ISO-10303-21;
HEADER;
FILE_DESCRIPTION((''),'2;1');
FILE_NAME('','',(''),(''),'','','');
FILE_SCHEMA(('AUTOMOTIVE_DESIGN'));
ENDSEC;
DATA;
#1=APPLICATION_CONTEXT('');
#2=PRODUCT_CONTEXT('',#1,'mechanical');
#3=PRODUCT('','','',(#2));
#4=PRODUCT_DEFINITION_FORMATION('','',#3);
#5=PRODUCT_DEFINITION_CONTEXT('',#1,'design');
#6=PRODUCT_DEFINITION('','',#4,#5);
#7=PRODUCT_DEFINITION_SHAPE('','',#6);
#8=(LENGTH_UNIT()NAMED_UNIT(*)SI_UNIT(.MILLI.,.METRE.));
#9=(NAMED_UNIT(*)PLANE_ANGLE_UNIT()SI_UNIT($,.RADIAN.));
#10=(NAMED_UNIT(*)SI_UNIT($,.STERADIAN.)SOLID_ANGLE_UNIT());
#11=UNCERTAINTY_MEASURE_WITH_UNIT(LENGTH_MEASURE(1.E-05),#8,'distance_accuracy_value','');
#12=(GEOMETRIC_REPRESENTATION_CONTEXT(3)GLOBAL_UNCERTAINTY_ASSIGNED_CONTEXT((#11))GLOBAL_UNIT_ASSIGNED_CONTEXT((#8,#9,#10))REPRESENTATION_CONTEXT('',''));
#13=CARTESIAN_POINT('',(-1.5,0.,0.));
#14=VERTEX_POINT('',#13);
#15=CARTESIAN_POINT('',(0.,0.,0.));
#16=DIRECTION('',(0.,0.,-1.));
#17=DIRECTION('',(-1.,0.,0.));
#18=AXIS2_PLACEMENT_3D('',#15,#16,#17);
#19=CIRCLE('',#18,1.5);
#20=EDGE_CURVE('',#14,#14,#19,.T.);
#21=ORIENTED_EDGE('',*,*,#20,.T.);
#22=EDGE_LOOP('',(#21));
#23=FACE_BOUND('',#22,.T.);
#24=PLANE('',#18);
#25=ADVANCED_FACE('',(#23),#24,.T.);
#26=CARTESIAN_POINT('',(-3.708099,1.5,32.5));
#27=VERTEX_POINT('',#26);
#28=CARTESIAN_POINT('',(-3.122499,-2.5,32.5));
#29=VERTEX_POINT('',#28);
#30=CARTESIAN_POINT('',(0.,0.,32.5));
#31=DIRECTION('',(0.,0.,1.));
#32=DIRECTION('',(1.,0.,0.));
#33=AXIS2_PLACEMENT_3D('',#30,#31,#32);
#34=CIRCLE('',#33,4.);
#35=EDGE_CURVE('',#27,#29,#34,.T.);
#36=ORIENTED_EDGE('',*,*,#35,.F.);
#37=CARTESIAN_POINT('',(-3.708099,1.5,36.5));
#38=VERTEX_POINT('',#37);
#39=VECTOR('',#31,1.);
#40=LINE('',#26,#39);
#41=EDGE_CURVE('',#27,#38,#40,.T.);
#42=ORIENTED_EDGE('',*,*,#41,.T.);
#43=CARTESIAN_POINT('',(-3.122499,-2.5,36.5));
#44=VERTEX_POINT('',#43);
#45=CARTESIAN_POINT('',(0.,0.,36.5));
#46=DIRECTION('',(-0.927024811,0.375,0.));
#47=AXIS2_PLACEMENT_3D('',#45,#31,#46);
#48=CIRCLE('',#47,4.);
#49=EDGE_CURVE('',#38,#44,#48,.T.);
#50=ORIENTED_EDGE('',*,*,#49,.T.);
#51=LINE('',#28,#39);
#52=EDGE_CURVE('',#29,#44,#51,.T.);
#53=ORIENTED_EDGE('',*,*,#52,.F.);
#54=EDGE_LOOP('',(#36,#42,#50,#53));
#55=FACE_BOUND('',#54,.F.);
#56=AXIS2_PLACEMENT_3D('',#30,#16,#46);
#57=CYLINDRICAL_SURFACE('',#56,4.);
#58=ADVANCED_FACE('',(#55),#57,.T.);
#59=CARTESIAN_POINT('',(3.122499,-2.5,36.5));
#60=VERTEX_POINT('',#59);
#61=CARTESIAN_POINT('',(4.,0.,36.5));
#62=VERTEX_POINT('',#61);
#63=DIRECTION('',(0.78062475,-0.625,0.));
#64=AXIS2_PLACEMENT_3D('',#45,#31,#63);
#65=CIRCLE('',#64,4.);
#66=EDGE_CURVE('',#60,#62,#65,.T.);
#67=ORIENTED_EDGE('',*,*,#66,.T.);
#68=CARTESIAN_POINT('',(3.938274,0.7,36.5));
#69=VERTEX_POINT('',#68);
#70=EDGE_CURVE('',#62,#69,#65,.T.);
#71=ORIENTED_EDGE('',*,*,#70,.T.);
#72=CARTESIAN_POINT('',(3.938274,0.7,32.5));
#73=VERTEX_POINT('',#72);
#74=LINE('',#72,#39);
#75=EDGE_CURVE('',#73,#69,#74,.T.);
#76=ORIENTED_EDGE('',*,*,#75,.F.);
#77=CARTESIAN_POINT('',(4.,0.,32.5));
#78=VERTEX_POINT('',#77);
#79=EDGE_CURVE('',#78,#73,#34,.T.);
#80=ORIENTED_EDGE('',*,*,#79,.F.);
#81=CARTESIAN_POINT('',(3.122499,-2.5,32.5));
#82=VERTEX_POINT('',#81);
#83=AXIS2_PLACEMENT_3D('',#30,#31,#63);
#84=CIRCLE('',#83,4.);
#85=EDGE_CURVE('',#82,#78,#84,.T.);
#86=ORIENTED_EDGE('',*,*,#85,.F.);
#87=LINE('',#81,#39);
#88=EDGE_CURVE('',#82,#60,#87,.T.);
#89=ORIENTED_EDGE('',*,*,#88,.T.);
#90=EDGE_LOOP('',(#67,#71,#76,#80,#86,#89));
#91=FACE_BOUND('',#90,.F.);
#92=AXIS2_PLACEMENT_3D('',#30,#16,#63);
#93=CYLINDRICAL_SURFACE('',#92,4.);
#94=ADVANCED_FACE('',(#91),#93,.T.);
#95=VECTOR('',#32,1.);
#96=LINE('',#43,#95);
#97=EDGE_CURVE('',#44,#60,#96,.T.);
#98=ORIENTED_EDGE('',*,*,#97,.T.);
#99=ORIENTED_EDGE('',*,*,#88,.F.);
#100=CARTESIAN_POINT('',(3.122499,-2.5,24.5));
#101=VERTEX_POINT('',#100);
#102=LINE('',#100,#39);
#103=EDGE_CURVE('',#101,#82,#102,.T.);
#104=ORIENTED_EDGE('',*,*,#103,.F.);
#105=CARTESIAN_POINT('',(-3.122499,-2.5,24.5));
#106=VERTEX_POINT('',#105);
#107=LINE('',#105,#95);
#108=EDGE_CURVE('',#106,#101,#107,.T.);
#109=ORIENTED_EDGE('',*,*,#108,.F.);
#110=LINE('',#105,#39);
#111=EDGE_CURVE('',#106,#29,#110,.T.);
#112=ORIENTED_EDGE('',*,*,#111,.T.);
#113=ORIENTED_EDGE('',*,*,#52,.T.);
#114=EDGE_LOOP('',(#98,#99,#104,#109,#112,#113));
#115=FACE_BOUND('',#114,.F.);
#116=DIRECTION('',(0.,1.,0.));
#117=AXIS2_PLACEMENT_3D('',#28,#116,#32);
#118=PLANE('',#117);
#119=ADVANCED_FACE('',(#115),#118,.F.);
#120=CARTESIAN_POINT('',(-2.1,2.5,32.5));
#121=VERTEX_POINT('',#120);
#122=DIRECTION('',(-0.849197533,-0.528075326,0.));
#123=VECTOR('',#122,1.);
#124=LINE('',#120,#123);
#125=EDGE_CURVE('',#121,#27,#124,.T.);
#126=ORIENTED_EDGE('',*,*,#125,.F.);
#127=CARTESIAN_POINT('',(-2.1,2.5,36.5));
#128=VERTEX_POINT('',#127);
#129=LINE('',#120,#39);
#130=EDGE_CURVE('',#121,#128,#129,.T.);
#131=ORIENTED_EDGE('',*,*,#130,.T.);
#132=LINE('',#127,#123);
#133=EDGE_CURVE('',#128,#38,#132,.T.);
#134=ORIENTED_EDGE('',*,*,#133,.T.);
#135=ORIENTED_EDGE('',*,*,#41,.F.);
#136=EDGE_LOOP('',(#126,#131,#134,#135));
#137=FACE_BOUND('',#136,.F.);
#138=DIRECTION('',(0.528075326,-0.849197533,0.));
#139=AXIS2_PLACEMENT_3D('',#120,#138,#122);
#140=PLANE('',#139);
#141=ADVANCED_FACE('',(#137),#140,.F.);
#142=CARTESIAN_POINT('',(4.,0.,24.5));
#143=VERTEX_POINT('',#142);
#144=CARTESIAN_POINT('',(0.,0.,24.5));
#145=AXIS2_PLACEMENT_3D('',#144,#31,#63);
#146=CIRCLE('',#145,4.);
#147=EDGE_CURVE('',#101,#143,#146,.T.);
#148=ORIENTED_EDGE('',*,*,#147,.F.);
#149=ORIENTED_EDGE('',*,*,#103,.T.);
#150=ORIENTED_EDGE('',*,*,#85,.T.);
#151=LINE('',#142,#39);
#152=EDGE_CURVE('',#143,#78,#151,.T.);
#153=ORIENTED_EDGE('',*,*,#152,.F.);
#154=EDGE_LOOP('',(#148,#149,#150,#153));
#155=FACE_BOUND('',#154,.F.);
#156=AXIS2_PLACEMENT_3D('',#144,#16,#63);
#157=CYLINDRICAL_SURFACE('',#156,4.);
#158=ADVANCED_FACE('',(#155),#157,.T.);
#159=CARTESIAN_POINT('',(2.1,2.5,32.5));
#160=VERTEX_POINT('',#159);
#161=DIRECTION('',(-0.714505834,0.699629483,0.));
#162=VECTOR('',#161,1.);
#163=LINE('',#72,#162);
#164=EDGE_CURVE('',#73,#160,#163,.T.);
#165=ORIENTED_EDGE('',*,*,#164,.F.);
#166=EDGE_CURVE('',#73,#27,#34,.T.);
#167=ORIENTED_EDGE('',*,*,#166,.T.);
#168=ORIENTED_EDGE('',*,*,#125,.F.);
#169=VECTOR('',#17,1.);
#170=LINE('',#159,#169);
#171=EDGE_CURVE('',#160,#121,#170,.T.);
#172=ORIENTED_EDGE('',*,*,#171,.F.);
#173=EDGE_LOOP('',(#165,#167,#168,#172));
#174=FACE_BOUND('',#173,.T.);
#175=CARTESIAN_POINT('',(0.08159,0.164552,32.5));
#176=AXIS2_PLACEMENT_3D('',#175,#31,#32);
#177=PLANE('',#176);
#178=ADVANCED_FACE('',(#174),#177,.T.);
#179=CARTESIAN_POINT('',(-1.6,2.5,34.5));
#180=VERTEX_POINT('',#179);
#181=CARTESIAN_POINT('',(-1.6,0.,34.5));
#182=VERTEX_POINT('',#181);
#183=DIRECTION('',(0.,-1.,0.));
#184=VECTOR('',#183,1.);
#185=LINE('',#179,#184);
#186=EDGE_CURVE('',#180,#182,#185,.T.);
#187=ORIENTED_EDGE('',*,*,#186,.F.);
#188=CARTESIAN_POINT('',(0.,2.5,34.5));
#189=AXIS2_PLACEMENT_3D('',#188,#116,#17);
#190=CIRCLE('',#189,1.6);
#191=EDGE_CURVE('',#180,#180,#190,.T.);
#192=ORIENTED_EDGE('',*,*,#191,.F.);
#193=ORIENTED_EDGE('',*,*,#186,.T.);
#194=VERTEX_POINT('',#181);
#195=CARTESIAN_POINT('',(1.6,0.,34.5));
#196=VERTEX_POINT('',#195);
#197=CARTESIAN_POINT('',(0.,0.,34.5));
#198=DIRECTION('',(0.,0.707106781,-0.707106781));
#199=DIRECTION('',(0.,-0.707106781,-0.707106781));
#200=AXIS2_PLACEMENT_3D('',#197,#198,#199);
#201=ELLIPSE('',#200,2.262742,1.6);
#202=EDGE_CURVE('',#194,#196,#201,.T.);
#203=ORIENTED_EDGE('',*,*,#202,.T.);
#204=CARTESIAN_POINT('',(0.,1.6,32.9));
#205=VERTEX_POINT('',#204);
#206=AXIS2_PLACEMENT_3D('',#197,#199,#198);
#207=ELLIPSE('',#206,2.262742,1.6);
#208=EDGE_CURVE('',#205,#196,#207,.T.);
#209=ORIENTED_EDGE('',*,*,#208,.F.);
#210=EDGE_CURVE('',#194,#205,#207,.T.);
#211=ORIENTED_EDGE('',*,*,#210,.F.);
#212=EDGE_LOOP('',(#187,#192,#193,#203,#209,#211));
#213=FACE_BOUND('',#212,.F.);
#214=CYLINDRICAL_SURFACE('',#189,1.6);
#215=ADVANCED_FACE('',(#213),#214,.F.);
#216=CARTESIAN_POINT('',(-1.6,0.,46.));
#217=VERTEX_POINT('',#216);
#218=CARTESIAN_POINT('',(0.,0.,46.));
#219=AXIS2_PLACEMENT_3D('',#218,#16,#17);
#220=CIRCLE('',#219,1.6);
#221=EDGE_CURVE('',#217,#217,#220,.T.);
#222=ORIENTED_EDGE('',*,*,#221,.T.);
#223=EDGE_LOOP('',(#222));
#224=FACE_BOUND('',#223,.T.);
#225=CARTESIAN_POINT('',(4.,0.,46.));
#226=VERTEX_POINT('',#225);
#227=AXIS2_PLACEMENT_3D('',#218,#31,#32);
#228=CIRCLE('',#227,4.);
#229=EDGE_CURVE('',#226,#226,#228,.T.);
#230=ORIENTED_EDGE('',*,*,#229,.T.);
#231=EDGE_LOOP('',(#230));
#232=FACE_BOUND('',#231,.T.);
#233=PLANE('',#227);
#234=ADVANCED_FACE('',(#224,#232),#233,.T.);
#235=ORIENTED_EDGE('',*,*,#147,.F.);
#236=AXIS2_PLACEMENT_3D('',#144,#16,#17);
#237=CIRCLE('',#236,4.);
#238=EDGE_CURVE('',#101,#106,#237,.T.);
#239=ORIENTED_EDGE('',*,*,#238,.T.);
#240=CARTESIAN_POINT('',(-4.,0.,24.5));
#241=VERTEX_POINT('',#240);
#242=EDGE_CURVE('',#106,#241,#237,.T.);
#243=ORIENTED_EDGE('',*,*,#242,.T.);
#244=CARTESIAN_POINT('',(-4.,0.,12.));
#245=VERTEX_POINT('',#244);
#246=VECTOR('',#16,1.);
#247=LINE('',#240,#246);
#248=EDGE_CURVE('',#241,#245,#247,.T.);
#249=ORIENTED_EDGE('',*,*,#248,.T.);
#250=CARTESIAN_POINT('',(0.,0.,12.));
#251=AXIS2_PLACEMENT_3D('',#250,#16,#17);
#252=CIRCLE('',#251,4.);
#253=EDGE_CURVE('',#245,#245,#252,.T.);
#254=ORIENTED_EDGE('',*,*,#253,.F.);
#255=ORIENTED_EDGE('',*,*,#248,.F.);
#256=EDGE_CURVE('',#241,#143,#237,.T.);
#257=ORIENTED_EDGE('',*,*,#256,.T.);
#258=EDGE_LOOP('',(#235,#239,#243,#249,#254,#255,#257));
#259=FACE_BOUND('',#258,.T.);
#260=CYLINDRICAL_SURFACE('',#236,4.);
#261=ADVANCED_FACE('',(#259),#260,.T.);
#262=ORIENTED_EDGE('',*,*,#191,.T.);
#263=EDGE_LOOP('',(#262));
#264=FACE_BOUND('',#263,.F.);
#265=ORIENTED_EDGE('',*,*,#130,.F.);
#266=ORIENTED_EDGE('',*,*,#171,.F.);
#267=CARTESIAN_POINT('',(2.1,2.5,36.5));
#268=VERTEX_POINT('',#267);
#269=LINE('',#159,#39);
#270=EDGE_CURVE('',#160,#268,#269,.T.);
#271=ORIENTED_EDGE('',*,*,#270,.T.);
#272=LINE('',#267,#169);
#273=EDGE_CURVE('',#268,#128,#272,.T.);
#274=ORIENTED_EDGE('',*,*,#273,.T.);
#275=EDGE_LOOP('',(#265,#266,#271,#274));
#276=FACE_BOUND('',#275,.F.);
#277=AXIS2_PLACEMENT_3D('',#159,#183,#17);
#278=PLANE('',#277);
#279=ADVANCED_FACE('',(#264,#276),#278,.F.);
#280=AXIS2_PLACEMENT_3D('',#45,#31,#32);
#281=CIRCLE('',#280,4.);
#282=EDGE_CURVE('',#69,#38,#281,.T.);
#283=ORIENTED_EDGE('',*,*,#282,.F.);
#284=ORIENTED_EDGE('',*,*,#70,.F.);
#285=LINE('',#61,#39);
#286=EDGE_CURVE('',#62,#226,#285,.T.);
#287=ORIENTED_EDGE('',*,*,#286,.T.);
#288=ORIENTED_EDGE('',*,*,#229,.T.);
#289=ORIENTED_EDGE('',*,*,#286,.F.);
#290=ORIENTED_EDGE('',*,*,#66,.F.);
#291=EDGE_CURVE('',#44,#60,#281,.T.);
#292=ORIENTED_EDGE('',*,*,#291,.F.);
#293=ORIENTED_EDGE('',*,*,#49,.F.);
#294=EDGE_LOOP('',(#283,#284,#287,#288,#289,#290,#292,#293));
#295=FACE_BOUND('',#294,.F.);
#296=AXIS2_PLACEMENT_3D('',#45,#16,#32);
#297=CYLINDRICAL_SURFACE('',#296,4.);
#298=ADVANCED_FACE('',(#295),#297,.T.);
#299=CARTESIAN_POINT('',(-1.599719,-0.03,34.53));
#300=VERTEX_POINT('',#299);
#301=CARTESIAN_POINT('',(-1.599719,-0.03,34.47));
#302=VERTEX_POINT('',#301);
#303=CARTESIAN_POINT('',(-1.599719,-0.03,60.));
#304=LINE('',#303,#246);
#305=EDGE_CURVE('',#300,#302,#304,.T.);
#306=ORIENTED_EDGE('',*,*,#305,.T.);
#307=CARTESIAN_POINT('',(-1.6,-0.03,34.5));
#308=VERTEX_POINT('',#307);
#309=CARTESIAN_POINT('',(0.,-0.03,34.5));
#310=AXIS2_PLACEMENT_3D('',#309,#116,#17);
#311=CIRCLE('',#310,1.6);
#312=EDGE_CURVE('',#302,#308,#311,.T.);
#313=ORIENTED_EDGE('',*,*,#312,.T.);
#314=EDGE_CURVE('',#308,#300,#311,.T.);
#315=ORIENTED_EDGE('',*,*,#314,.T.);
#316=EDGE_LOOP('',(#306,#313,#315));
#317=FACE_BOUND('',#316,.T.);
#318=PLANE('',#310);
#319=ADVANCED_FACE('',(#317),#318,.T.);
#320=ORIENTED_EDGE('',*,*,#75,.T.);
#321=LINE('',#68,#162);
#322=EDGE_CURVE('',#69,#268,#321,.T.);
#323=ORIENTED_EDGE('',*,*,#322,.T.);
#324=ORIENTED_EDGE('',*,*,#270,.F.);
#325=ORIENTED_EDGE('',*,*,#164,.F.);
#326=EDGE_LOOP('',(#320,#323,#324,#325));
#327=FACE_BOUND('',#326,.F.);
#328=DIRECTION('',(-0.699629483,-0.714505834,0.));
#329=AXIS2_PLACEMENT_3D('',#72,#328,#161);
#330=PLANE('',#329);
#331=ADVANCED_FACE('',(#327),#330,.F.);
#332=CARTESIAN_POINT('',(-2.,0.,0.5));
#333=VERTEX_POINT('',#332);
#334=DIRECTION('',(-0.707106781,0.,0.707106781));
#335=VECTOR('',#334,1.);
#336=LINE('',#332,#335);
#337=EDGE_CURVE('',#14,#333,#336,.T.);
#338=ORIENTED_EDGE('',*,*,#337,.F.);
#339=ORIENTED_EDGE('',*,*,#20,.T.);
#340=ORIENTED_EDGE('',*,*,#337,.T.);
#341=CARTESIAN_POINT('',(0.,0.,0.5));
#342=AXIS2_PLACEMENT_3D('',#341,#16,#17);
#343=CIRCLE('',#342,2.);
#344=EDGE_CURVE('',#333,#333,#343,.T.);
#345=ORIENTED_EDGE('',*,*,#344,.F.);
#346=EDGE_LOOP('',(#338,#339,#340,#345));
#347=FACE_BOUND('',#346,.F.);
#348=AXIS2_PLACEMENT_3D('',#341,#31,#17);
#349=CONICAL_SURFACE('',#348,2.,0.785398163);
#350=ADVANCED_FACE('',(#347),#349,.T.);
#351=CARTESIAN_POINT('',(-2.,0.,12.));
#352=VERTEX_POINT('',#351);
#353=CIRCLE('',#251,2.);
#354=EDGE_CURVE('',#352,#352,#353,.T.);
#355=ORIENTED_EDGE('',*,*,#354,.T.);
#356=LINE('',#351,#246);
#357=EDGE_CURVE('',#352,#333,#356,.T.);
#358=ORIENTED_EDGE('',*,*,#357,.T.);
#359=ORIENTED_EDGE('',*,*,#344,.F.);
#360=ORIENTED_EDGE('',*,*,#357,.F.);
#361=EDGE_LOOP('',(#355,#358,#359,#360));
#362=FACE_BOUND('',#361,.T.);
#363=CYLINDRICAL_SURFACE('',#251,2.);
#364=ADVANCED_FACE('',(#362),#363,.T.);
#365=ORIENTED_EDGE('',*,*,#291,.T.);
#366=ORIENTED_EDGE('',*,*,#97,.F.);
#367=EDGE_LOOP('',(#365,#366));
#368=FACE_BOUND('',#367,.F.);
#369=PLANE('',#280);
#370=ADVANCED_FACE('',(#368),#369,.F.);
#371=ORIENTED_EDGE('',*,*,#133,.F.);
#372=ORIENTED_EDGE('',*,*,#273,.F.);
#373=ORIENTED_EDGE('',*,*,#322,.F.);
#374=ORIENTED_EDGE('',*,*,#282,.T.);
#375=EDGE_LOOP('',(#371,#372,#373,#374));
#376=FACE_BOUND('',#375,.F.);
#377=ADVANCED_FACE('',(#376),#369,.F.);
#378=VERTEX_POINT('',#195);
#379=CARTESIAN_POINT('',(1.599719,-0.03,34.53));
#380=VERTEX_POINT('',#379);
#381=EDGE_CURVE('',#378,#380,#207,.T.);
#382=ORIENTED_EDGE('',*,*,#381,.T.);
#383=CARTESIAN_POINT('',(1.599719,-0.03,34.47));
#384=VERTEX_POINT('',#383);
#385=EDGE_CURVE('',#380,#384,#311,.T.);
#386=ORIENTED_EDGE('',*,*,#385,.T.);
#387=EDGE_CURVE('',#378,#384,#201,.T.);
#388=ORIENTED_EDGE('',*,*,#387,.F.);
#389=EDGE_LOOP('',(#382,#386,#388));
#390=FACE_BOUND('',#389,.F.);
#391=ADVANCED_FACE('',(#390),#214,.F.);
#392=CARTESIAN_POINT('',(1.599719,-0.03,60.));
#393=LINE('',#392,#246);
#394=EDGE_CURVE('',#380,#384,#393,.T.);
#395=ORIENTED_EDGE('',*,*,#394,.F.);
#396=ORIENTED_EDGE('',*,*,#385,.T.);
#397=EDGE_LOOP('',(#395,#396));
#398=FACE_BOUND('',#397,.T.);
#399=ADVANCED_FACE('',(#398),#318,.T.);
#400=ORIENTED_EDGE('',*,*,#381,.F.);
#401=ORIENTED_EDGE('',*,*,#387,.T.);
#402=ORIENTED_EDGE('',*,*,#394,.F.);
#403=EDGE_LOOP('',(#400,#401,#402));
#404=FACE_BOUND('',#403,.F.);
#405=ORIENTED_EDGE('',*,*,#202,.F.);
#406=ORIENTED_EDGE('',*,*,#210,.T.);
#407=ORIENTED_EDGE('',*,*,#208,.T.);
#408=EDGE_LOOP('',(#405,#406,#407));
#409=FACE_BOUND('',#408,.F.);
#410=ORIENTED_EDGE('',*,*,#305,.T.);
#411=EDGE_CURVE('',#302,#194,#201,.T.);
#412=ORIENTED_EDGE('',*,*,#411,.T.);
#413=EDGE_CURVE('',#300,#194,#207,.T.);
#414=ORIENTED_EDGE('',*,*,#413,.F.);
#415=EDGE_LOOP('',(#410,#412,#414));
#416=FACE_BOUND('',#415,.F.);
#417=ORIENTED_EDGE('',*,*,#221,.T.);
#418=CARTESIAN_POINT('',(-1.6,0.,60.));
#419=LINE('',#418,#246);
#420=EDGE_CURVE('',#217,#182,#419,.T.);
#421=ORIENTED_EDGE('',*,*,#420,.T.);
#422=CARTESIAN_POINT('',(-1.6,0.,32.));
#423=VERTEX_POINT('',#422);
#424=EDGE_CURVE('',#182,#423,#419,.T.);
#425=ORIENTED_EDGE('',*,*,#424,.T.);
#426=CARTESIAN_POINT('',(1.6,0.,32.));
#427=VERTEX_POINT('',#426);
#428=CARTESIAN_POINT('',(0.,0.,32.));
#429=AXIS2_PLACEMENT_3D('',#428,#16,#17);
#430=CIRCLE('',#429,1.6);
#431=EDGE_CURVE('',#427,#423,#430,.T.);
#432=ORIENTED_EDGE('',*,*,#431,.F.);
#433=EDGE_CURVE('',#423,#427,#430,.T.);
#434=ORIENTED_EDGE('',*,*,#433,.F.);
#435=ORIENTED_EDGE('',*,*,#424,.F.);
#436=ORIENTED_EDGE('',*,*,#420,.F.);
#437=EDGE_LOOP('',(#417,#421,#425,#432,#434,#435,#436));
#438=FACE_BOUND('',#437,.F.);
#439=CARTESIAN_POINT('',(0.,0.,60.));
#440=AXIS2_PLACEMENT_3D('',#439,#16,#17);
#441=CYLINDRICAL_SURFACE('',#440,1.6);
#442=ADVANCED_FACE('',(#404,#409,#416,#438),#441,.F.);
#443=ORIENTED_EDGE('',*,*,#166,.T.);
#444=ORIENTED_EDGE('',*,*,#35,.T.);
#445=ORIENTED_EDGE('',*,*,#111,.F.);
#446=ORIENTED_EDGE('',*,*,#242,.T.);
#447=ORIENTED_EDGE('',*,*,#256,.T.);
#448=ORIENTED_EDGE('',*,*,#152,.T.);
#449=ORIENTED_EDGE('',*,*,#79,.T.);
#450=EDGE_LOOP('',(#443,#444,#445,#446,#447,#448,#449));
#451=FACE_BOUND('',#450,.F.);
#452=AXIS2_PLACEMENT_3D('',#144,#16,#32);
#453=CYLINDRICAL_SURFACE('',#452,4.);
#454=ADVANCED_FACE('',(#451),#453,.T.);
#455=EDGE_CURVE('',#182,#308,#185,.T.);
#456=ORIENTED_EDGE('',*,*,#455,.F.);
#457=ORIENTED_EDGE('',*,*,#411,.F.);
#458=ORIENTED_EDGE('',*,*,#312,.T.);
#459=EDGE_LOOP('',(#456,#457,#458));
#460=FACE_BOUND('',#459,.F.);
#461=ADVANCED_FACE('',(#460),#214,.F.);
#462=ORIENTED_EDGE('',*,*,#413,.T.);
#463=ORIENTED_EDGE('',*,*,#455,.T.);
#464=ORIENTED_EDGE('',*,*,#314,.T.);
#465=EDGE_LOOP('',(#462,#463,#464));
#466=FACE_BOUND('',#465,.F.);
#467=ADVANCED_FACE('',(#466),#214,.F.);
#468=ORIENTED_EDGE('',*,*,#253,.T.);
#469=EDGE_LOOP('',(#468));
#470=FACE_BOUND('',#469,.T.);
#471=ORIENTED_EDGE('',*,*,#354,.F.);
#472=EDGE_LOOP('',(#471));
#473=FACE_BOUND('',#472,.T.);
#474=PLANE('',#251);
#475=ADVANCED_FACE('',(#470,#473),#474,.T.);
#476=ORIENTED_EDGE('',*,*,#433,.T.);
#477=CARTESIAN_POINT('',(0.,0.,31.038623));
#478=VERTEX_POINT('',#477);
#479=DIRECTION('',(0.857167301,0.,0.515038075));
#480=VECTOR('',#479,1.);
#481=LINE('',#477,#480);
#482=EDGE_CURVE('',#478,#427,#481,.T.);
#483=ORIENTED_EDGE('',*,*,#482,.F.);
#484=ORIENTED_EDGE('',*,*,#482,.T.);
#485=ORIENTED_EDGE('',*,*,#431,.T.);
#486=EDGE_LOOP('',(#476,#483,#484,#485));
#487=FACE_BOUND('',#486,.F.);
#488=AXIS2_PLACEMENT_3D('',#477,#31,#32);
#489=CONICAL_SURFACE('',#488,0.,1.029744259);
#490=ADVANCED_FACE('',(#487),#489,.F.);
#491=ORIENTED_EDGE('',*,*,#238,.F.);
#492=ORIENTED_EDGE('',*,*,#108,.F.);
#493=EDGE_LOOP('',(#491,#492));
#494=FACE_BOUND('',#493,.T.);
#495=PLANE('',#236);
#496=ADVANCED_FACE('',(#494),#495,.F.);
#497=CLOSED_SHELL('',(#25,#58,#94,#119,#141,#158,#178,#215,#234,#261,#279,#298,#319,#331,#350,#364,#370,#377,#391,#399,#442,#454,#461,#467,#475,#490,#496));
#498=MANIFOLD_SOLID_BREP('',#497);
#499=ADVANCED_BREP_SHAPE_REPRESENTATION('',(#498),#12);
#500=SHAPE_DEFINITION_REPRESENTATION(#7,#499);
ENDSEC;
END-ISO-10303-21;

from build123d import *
from build123d import SkipClean  # not in build123d's __all__

# Parameters (mm, degrees)
F2_SIZE   = 0.5
F4_DEPTH  = 8
F6_DEPTH  = 4
F7_R      = 4
F8_DEPTH  = 9.5
F10_D     = 3.2
F10_DEPTH = 14
F10_TIP   = 0.9613769904
F11_R     = 1.6
F12_DEPTH = 2.53


# Not quite as in the source:
# - after a boolean that leaves OpenCascade's solid faulty, fix() repairs it


with BuildPart() as f1:
    # F0 (on Front) → F1 (revolve)
    with BuildSketch(Plane.XZ):
        Polygon((-2, 0), (0, 0), (0, 24.5), (-4, 24.5), (-4, 12), (-2, 12), align=None)
    revolve(axis=Axis((0, 0, 12.25), (0, 0, -1)))

    # F2
    f2_edges = [f1.edges().sort_by_distance(p)[0] for p in [
        (2, 0, 0),
    ]]
    chamfer(f2_edges, length=F2_SIZE)

    # F3 (on face) → F4 (join)
    with BuildSketch(Plane.XY.offset(24.5)):
        with BuildLine():
            Line((-3.1224989992, -2.5), (3.1224989992, -2.5))
            ThreePointArc((3.1224989992, -2.5), (3.7742546282, -1.3247648854), (4, 0))
            ThreePointArc((4, 0), (-1.3247648854, 3.7742546282), (-3.1224989992, -2.5))
        make_face()
    with SkipClean():  # cleaning this boolean's faces spoils the solid; the shape is the same uncleaned
        extrude(amount=F4_DEPTH)

    # F5 (on face) → F6 (join)
    with BuildSketch(Plane.XY.offset(32.5)):
        with BuildLine():
            Line((-3.1224989992, -2.5), (3.1224989992, -2.5))
            ThreePointArc((3.1224989992, -2.5), (3.8760324942, -0.9881154306), (3.9382737335, 0.7))
            Line((3.9382737335, 0.7), (2.1, 2.5))
            Line((2.1, 2.5), (-2.1, 2.5))
            Line((-2.1, 2.5), (-3.7080992435, 1.5))
            ThreePointArc((-3.7080992435, 1.5), (-3.9578110223, -0.5794237754), (-3.1224989992, -2.5))
        make_face()
    extrude(amount=F6_DEPTH)

    add(f1.part.fix(), mode=Mode.REPLACE)

    # F7 (on face) → F8 (join)
    with BuildSketch(Plane.XY.offset(36.5)):
        Circle(F7_R)
    extrude(amount=F8_DEPTH)

    # F10
    with Locations(Plane.XY.offset(46)):
        with Locations((0, 0)):
            Hole(F10_D / 2, depth=F10_DEPTH)
            with Locations((0, 0, -(F10_DEPTH + F10_TIP / 2))):  # 118° drill point
                Cone(0, F10_D / 2, F10_TIP, mode=Mode.SUBTRACT)

    # F11 (on face) → F12 (cut)
    with BuildSketch(Plane(origin=(0, 2.5, 0), x_dir=(-1, 0, 0), z_dir=(0, 1, 0))):
        with Locations((0, 34.5)):
            Circle(F11_R)
    extrude(amount=-F12_DEPTH, mode=Mode.SUBTRACT)


solid = f1.part
